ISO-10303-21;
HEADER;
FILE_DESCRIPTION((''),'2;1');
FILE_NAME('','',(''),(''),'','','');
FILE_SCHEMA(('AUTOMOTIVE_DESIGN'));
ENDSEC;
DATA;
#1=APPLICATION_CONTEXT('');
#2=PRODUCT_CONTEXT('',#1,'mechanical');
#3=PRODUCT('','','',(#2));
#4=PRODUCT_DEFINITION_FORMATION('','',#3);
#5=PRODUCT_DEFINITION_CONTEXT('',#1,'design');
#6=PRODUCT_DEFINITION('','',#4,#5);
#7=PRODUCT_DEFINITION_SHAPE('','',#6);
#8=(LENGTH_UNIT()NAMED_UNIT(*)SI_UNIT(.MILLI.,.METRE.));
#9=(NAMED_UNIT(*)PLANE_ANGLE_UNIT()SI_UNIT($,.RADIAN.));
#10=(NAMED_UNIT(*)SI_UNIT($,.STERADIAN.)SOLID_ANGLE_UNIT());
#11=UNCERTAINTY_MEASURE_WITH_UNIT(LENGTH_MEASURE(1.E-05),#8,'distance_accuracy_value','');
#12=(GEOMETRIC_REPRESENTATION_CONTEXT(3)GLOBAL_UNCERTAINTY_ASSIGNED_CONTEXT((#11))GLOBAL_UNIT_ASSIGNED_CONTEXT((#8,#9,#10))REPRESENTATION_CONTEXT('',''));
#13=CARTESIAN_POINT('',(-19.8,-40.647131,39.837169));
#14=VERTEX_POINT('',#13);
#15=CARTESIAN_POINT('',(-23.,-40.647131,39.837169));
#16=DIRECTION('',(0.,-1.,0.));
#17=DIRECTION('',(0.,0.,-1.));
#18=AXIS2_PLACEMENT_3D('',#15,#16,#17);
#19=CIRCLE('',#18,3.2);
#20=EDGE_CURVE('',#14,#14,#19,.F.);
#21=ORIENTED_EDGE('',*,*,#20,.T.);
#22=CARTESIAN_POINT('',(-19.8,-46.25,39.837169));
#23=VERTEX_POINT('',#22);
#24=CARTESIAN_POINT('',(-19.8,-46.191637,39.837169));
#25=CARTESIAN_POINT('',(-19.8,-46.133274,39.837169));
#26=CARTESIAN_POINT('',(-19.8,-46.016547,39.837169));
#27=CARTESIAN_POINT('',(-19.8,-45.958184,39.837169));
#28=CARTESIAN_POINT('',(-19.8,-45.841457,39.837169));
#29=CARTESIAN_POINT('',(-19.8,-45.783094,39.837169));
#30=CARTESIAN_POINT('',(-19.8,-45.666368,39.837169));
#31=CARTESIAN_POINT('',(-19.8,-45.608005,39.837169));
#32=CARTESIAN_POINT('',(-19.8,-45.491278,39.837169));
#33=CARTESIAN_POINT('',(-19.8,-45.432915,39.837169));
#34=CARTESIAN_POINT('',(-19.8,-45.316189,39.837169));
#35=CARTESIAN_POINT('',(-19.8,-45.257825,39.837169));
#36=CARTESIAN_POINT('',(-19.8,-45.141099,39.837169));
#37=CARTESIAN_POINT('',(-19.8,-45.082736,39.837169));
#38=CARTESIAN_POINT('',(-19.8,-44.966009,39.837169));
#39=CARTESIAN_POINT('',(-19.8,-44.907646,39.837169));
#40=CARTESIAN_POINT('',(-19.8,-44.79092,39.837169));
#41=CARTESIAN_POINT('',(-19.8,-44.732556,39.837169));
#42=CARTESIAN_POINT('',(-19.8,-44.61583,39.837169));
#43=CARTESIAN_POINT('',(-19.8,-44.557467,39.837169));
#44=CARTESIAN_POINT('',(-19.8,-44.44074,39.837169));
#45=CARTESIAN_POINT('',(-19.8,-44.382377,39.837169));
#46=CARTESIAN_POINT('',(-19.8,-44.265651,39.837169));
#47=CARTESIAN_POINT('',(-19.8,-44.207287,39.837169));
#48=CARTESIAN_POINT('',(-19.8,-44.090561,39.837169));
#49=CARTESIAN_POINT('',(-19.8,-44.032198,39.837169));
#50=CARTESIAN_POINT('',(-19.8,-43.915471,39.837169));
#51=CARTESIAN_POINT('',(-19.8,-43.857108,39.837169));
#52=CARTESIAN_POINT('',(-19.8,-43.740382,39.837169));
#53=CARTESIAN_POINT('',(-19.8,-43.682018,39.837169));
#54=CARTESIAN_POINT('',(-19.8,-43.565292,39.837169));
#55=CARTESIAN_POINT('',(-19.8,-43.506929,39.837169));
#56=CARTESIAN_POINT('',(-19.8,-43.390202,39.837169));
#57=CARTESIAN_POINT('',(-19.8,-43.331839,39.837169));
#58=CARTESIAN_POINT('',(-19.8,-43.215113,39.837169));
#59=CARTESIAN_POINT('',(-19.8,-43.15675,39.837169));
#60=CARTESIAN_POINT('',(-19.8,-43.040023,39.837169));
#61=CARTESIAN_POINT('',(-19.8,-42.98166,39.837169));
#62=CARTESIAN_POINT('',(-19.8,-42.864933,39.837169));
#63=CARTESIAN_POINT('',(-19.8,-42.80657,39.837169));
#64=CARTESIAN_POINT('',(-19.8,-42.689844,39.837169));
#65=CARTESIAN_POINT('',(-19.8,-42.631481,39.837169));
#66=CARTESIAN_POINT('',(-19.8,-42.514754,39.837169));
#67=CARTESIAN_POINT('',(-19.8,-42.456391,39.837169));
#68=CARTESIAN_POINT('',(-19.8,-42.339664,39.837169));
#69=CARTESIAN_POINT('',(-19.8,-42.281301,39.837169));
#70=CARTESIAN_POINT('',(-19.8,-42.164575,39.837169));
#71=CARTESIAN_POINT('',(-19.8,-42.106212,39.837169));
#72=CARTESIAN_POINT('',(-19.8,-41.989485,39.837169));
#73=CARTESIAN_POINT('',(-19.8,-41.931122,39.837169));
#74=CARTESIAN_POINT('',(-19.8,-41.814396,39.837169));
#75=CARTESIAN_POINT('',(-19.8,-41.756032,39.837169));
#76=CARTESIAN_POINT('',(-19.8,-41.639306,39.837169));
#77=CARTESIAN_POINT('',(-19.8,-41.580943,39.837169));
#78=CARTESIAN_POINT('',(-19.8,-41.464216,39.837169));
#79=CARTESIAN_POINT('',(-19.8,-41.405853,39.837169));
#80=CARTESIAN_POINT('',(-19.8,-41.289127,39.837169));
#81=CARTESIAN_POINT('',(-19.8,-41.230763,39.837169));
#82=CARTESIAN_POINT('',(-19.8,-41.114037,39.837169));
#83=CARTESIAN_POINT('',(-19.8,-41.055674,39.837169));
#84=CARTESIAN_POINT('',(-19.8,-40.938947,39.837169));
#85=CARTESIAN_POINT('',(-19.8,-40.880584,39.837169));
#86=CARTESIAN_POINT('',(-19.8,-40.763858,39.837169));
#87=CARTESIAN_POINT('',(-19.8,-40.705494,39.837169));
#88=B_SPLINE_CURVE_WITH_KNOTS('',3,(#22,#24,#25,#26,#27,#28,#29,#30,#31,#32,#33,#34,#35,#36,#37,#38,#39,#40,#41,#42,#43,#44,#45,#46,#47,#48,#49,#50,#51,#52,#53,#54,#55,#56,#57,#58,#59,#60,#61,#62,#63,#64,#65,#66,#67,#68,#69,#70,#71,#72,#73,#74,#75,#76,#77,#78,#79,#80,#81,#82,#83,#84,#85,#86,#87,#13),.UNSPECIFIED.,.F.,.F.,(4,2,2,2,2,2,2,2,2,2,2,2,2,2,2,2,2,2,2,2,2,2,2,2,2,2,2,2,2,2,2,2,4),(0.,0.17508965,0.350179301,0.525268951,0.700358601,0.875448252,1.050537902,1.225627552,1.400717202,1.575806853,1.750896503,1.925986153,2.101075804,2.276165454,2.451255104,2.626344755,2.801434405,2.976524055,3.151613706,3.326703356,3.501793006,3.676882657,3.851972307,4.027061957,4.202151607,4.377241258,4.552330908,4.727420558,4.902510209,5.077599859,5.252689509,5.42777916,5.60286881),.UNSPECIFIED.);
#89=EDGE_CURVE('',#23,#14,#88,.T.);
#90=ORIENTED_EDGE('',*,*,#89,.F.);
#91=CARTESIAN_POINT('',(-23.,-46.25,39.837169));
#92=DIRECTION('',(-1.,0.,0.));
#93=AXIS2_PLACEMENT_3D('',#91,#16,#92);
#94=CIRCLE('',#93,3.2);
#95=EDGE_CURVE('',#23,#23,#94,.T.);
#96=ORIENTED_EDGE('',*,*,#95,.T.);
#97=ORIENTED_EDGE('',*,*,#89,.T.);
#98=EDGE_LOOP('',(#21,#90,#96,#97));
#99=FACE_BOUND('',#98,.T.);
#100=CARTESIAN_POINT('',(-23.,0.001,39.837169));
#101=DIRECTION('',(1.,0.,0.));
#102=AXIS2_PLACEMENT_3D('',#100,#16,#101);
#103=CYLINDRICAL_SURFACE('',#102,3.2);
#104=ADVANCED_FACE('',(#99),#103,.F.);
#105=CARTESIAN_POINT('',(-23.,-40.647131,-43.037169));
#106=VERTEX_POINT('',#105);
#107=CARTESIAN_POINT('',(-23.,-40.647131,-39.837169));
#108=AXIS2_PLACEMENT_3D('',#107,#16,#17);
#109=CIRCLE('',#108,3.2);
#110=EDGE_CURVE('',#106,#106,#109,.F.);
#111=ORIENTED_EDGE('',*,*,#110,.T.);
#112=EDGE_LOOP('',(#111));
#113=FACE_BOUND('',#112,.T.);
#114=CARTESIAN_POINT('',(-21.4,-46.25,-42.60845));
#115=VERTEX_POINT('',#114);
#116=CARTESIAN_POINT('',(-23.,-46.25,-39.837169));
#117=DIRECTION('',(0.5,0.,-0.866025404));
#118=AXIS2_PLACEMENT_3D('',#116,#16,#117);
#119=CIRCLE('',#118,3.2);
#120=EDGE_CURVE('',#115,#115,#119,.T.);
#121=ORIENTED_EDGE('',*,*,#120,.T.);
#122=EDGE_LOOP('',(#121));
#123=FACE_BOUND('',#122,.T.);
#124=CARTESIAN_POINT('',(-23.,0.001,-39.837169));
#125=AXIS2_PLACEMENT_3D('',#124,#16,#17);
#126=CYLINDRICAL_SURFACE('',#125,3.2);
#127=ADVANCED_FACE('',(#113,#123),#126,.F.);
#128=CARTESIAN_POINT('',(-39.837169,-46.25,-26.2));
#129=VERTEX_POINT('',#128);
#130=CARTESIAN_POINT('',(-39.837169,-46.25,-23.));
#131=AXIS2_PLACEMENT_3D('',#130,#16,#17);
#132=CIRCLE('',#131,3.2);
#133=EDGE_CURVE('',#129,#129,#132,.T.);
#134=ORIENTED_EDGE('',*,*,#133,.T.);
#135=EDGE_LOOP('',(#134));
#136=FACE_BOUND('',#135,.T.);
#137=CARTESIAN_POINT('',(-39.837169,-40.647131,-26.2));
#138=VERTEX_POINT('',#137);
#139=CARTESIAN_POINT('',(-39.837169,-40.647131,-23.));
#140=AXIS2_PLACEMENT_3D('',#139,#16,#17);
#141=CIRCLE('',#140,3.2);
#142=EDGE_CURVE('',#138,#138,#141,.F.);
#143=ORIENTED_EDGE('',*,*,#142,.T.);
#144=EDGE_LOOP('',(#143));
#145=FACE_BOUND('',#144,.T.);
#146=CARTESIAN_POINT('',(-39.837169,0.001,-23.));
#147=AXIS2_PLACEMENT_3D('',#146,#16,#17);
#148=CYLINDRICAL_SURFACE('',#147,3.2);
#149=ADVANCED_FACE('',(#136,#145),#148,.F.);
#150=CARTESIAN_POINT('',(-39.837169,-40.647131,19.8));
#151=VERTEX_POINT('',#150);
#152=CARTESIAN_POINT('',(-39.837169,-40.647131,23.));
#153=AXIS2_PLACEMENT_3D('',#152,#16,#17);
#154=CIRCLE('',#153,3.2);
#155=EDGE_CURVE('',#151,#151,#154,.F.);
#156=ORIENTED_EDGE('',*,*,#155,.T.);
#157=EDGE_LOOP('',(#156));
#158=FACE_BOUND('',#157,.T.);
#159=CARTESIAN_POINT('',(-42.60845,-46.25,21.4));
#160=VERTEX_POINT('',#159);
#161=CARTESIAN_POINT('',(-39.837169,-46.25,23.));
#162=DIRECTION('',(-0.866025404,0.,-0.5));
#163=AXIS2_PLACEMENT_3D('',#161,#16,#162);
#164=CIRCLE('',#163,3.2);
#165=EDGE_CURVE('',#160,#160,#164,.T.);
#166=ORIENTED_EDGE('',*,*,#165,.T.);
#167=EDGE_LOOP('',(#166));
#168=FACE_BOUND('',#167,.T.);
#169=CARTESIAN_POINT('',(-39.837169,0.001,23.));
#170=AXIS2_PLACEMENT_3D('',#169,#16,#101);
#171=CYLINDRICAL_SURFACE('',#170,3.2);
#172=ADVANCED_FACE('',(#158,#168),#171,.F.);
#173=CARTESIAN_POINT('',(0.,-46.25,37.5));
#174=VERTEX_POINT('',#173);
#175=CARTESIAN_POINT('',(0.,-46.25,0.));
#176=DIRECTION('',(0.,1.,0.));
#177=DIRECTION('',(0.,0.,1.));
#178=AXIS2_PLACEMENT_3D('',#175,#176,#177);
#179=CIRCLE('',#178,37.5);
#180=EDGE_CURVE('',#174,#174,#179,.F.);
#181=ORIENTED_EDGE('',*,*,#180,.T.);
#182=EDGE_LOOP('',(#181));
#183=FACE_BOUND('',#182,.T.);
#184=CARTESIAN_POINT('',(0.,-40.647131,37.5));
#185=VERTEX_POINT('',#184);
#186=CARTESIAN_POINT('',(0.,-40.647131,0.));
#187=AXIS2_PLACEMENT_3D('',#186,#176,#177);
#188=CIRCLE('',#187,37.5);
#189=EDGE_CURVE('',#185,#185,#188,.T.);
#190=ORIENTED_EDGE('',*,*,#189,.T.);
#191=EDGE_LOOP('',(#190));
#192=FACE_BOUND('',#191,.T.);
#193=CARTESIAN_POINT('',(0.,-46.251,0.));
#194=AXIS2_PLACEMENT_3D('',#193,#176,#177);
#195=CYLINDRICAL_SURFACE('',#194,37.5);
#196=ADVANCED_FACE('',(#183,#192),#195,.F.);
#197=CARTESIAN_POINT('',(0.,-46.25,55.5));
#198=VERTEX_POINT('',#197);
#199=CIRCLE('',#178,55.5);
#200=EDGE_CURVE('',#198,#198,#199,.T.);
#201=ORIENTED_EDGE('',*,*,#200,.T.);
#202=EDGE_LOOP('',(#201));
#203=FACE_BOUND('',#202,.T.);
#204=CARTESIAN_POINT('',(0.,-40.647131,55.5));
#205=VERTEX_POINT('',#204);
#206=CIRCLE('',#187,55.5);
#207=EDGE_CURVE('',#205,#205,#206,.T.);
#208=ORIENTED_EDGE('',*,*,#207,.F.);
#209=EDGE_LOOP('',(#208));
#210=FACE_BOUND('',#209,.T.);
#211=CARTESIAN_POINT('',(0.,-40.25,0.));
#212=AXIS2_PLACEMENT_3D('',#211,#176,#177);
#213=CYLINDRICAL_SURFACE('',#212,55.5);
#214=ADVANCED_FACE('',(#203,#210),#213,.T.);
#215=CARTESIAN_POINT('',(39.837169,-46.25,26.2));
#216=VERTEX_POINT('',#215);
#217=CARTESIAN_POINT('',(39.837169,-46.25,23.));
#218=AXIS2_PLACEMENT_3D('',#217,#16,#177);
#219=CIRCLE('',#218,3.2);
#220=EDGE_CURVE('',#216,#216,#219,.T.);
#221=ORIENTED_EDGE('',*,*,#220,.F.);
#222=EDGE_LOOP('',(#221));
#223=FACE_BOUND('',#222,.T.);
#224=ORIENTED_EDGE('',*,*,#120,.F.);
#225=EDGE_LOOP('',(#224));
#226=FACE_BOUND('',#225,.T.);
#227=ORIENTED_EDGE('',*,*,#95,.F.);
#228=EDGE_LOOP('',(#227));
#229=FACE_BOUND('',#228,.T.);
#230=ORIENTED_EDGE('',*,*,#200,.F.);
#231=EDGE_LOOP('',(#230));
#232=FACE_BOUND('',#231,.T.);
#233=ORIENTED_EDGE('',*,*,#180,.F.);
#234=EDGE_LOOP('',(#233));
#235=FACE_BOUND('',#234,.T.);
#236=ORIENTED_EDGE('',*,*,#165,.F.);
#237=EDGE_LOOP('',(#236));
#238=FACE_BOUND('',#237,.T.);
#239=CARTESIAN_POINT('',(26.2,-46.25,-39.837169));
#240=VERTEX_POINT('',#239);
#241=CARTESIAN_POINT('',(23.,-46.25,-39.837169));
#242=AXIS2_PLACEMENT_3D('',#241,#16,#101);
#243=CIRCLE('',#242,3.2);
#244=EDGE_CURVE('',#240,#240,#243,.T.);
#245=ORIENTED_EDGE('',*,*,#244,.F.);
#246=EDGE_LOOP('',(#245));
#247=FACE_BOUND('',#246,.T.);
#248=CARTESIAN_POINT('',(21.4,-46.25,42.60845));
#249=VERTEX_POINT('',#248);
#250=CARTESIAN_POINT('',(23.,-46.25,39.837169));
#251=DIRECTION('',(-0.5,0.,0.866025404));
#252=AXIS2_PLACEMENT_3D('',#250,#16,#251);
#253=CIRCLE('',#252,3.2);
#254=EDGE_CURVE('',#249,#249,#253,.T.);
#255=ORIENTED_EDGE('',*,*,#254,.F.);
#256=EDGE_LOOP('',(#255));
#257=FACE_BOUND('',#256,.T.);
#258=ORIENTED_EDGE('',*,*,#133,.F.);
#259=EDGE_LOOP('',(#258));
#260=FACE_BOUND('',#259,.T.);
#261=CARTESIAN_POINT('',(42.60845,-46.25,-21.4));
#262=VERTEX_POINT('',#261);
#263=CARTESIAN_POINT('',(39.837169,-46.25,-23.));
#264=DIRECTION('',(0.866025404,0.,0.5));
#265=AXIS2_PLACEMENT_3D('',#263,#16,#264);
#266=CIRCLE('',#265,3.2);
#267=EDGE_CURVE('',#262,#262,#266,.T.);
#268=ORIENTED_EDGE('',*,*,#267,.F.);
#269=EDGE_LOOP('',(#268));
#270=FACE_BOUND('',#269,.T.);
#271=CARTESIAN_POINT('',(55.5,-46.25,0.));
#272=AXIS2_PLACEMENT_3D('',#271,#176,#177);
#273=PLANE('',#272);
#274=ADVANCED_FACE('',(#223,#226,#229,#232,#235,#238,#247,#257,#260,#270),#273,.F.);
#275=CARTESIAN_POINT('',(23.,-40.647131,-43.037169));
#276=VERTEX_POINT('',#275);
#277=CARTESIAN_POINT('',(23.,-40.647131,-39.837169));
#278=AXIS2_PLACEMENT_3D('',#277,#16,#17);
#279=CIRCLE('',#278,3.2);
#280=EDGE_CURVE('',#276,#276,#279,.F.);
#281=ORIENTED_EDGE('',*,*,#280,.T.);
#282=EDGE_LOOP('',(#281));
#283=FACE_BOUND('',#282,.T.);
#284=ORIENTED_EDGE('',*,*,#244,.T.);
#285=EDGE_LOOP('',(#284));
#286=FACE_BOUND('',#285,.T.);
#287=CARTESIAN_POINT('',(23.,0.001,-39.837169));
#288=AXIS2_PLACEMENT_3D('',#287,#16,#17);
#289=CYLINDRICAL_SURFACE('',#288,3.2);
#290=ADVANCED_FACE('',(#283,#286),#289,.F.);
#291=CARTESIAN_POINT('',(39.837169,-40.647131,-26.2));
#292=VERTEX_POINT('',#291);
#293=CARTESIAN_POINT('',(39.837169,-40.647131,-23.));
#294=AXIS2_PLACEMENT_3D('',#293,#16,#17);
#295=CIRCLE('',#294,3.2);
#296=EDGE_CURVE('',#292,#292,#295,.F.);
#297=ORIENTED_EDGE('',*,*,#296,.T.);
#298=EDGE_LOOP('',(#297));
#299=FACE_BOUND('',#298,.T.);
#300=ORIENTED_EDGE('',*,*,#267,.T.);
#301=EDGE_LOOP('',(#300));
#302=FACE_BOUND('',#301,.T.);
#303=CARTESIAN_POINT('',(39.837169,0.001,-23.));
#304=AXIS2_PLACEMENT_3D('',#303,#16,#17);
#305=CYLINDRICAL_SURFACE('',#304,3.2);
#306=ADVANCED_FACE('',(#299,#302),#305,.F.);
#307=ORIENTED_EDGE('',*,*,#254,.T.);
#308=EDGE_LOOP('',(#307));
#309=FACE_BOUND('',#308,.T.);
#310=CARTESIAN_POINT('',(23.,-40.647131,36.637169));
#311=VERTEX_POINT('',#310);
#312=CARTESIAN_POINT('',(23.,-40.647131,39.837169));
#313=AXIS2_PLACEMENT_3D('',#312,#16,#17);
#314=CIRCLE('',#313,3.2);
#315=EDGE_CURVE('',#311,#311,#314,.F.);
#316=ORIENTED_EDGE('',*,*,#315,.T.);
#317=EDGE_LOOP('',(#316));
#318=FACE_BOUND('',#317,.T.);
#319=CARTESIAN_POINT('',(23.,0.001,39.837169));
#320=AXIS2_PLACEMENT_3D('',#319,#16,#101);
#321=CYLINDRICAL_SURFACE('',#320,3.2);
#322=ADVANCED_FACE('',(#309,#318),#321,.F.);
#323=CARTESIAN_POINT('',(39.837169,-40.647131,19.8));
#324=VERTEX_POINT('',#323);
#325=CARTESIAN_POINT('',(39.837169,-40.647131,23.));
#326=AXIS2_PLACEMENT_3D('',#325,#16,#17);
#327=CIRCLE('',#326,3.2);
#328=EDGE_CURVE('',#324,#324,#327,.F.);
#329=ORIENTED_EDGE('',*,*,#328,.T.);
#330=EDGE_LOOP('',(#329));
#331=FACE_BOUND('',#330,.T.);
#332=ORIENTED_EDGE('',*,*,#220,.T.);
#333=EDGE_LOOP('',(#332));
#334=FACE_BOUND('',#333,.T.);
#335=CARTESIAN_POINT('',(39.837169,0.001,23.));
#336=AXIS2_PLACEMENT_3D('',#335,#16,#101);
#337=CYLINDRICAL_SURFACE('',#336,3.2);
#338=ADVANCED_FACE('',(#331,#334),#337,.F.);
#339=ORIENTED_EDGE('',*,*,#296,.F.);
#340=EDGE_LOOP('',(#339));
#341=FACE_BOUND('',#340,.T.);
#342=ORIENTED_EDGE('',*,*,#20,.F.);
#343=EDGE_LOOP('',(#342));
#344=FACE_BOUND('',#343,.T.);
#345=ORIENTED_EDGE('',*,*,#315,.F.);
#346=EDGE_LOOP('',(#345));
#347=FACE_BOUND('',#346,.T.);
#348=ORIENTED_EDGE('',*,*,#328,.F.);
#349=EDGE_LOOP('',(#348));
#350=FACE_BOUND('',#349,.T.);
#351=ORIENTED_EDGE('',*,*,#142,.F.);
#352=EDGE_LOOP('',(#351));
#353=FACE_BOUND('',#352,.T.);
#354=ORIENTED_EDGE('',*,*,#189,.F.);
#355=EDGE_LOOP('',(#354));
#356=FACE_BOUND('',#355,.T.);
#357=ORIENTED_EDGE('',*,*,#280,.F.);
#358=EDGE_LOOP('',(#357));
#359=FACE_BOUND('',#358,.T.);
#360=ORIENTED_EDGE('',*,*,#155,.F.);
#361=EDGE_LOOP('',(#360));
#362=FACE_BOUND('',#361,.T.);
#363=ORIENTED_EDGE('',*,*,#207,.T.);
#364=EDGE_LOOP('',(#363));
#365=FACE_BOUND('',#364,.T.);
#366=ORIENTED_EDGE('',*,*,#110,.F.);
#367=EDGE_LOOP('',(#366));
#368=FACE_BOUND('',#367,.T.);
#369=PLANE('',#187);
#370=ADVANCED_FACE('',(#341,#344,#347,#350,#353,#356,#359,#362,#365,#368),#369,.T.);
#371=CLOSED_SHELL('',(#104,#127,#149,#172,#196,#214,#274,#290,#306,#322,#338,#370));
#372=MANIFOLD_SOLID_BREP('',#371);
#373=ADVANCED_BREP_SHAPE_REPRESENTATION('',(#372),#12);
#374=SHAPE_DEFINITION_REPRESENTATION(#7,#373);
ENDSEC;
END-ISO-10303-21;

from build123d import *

# Parameters (mm, degrees)
STOCK_BATTERYPLATE_1_START       = -46.25
STOCK_BATTERYPLATE_1_OUTLINE_R   = 55.5
STOCK_BATTERYPLATE_1_OUTLINE_R_2 = 3.2
STOCK_BATTERYPLATE_1_OUTLINE_R_3 = 3.175
STOCK_BATTERYPLATE_1_DEPTH       = 5.60286881
CUT_EXTRUDE1_REACH               = 80.689
SKETCH1_R                        = 37.5


# Read off the part's stored shape, not the designer's step: Stock-batteryplate-1
with BuildPart() as part:
    # Stock-batteryplate-1 outline → Stock-batteryplate-1 (new body)
    with BuildSketch(Plane(origin=(0, 0, 0), x_dir=(1, 0, 0), z_dir=(0, 1, 0)).offset(STOCK_BATTERYPLATE_1_START)):
        Circle(STOCK_BATTERYPLATE_1_OUTLINE_R)
        with Locations((-23, -39.837168574)):
            Circle(STOCK_BATTERYPLATE_1_OUTLINE_R_2, mode=Mode.SUBTRACT)
        with Locations((-39.837168574, -23)):
            Circle(STOCK_BATTERYPLATE_1_OUTLINE_R_2, mode=Mode.SUBTRACT)
        with Locations((-14.849242405, -14.849242405)):
            Circle(STOCK_BATTERYPLATE_1_OUTLINE_R_2, mode=Mode.SUBTRACT)
        with Locations((23, -39.837168574)):
            Circle(STOCK_BATTERYPLATE_1_OUTLINE_R_2, mode=Mode.SUBTRACT)
        with Locations((14.849242405, -14.849242405)):
            Circle(STOCK_BATTERYPLATE_1_OUTLINE_R_2, mode=Mode.SUBTRACT)
        with Locations((39.837168574, -23)):
            Circle(STOCK_BATTERYPLATE_1_OUTLINE_R_2, mode=Mode.SUBTRACT)
        with Locations((-39.837168574, 23)):
            Circle(STOCK_BATTERYPLATE_1_OUTLINE_R_2, mode=Mode.SUBTRACT)
        with Locations((-14.849242405, 14.849242405)):
            Circle(STOCK_BATTERYPLATE_1_OUTLINE_R_2, mode=Mode.SUBTRACT)
        with Locations((-23, 39.837168574)):
            Circle(STOCK_BATTERYPLATE_1_OUTLINE_R_2, mode=Mode.SUBTRACT)
        Circle(STOCK_BATTERYPLATE_1_OUTLINE_R_3, mode=Mode.SUBTRACT)
        with Locations((14.849242405, 14.849242405)):
            Circle(STOCK_BATTERYPLATE_1_OUTLINE_R_2, mode=Mode.SUBTRACT)
        with Locations((39.837168574, 23)):
            Circle(STOCK_BATTERYPLATE_1_OUTLINE_R_2, mode=Mode.SUBTRACT)
        with Locations((23, 39.837168574)):
            Circle(STOCK_BATTERYPLATE_1_OUTLINE_R_2, mode=Mode.SUBTRACT)
    extrude(amount=STOCK_BATTERYPLATE_1_DEPTH)

    # Sketch1 → Cut-Extrude1 (cut, up to next)
    with BuildSketch(Plane(origin=(0, -40.64713119, 0), x_dir=(1, 0, 0), z_dir=(0, 1, 0)), mode=Mode.PRIVATE) as cut_extrude1_sk1:
        with Locations(Location((0, 0, 0), (0, 0, 270))):
            Circle(SKETCH1_R)
    cut_extrude1_tool1 = extrude(cut_extrude1_sk1.sketch, amount=-CUT_EXTRUDE1_REACH, mode=Mode.PRIVATE) & part.part
    add(cut_extrude1_tool1.solids().sort_by_distance((0, -40.647131, 0))[0], mode=Mode.SUBTRACT)


solid = part.part
